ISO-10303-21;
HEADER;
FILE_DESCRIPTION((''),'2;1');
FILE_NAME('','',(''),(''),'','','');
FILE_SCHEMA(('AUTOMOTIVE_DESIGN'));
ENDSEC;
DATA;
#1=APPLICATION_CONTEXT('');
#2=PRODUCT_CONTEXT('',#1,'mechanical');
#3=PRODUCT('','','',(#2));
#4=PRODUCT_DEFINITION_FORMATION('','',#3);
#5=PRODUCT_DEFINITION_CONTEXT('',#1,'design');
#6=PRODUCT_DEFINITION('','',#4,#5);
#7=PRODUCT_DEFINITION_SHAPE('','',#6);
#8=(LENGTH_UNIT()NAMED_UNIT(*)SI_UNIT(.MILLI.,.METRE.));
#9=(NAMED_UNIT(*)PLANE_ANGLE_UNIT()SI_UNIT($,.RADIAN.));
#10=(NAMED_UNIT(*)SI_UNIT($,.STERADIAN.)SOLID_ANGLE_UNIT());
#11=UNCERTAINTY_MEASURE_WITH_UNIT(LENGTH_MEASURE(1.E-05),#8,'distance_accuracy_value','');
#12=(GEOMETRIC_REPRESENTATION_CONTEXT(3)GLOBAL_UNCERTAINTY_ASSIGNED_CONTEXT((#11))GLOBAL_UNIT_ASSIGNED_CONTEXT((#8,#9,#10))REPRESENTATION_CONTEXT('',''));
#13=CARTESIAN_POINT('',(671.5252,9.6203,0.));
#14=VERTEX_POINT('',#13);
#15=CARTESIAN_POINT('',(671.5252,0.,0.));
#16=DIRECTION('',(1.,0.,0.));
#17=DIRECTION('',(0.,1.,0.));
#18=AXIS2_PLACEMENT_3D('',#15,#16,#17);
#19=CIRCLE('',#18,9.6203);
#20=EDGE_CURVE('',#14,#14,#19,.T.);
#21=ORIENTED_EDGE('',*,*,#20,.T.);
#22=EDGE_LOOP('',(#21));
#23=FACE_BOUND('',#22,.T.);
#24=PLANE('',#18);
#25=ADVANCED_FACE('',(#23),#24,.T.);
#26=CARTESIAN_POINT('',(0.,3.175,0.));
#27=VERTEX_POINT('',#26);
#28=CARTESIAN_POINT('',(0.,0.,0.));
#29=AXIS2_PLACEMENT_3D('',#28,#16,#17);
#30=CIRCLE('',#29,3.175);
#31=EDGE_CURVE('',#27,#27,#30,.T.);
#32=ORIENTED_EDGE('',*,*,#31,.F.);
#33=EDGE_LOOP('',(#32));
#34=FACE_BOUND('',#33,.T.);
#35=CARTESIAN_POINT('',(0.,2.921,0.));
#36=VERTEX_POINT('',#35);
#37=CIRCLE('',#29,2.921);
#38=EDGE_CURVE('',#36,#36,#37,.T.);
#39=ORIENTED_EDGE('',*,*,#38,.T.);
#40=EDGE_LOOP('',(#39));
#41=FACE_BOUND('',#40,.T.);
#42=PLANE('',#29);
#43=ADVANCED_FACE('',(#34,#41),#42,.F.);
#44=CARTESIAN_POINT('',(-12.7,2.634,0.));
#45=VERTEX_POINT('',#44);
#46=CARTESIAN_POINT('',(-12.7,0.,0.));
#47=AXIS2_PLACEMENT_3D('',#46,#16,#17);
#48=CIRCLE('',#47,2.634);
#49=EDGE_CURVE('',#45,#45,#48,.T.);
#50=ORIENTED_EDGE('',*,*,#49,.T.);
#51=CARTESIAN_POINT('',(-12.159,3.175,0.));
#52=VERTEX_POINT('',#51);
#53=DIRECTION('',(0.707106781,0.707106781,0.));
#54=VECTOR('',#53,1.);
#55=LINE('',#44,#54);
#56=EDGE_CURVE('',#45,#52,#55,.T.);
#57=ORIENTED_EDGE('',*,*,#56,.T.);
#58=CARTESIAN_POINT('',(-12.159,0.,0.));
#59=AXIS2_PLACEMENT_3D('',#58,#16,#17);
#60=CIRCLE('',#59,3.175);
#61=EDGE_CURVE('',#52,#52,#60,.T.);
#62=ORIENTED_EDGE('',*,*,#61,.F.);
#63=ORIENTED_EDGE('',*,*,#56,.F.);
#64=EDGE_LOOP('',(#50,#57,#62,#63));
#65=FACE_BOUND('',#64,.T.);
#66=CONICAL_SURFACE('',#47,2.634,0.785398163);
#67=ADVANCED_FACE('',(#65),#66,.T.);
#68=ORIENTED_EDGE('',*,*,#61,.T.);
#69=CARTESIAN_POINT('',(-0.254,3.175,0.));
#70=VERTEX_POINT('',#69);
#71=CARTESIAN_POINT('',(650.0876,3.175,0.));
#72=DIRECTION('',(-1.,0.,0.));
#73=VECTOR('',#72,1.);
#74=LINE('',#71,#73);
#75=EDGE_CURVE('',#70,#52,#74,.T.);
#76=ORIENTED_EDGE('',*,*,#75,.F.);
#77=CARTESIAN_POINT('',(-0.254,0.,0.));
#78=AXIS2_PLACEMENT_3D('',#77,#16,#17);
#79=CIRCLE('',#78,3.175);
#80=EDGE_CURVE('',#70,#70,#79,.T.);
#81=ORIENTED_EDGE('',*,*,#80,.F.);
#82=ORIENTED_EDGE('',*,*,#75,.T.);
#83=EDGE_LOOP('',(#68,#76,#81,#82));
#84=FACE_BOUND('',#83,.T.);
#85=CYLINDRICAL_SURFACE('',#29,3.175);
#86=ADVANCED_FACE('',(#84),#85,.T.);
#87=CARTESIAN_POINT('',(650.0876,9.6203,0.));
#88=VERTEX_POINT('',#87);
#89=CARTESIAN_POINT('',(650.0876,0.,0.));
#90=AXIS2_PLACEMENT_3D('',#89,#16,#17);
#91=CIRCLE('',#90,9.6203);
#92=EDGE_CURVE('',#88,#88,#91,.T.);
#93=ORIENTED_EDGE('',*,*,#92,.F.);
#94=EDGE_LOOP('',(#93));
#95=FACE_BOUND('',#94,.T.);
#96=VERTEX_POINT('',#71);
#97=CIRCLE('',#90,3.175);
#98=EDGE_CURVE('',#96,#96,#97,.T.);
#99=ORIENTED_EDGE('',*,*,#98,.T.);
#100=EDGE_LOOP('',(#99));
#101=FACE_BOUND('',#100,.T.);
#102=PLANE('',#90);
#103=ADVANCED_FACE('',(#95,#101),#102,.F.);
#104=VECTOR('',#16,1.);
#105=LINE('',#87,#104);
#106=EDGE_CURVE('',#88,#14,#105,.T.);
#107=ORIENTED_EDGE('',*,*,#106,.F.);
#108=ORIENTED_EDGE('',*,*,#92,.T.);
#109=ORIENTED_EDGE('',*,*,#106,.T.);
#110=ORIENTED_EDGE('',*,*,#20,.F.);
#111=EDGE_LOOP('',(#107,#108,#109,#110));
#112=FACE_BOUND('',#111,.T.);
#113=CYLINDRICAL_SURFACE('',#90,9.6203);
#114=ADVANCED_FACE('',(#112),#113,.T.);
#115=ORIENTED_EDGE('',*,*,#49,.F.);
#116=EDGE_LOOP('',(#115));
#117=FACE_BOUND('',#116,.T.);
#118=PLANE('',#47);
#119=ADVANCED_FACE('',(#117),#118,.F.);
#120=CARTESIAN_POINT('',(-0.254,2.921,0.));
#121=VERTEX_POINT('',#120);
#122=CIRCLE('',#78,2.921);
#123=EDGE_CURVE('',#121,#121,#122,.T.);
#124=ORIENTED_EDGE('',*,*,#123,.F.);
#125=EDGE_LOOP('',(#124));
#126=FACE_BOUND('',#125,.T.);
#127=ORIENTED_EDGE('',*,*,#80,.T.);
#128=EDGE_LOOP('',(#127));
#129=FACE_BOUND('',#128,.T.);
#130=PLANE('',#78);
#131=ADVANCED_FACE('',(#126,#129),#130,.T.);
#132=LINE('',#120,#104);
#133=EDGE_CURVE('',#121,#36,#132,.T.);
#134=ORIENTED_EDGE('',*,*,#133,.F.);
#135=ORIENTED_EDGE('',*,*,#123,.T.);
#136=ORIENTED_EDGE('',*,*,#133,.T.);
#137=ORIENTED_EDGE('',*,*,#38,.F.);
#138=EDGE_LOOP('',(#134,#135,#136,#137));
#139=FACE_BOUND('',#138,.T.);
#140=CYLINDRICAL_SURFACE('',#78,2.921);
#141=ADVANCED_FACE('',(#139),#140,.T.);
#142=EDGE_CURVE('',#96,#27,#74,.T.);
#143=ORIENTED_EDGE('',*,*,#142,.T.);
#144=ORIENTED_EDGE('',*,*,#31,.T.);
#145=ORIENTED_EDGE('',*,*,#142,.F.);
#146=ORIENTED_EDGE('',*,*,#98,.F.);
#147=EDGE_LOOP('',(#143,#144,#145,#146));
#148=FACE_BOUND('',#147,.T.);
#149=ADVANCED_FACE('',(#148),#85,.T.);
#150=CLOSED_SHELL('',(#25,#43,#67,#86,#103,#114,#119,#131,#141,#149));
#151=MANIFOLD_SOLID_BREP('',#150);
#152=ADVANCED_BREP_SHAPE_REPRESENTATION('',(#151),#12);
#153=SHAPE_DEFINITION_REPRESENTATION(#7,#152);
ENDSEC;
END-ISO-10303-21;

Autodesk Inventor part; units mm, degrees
sketch "Sketch_1" plane through (0, 0, 0) normal (0, 0, 1) x (1, 0, 0)
  line L0 (671.5252, 0) -> (0, 0)
  line L1 (0, 0) -> (0, 3.175)
  line L2 (0, 3.175) -> (650.0876, 3.175)
  line L3 (650.0876, 3.175) -> (650.0876, 9.6203)
  line L4 (650.0876, 9.6203) -> (671.5252, 9.6203)
  line L5 (671.5252, 9.6203) -> (671.5252, 0)
  line L6 (671.5252, 0) -> (0, 0)
revolve "Revolution1" add sketch "Sketch_1" angle 360 about axis through (671.5252, 0, 0) along (1, 0, 0)
sketch "Sketch_3" plane through (0, 0, 0) normal (0, 0, 1) x (1, 0, 0)
  line L0 (0, 0) -> (-12.7, 0)
  line L1 (-12.7, 0) -> (-12.7, 2.634)
  line L2 (-12.7, 2.634) -> (-12.159, 3.175)
  line L3 (-12.159, 3.175) -> (0, 3.175)
  line L4 (0, 3.175) -> (0, 0)
  line L5 (0, 0) -> (-12.7, 0)
revolve "Revolution2" add sketch "Sketch_3" angle 360 about axis through (0, 0, 0) along (1, 0, 0)
thread "Thread1" size "1/4-28 UNF" class "2A" standard "ANSI Unified Screw Threads" length 12.159
sketch "Sketch_30" plane through (0, 0, 0) normal (0, 0, 1) x (1, 0, 0)
  line L0 (0, 0) -> (-0.254, 0)
  line L1 (-0.254, 2.921) -> (0, 2.921)
  line L2 (0, 2.921) -> (0, 3.429)
  line L3 (0, 3.429) -> (-0.254, 3.429)
  line L4 (-0.254, 3.429) -> (-0.254, 2.921)
revolve "Revolution3" cut sketch "Sketch_30" angle 360 about axis through (0, 0, 0) along (1, 0, 0)
ref_plane "dia1_XY" through (0, 3.175, 0) normal (1, 0, 0) x (0, 0, -1)
ref_plane "dia1_YZ" through (0, 3.175, 0) normal (0, 0, -1) x (0, 1, 0)
ref_plane "dia1_ZX" through (0, 3.175, 0) normal (0, 1, 0) x (1, 0, 0)
ref_plane "dia12_XY" through (0, 0, 10.9537) normal (1, 0, 0) x (0, 0, -1)
ref_plane "dia12_YZ" through (0, 0, 10.9537) normal (0, 0, -1) x (0, 1, 0)
ref_plane "dia12_ZX" through (0, 0, 10.9537) normal (0, 1, 0) x (1, 0, 0)
ref_plane "dia2_XY" through (0, -3.175, 0) normal (1, 0, 0) x (0, 0, -1)
ref_plane "dia2_YZ" through (0, -3.175, 0) normal (0, 0, -1) x (0, 1, 0)
ref_plane "dia2_ZX" through (0, -3.175, 0) normal (0, 1, 0) x (1, 0, 0)
ref_plane "dia22_XY" through (0, 0, -10.9537) normal (1, 0, 0) x (0, 0, -1)
ref_plane "dia22_YZ" through (0, 0, -10.9537) normal (0, 0, -1) x (0, 1, 0)
ref_plane "dia22_ZX" through (0, 0, -10.9537) normal (0, 1, 0) x (1, 0, 0)
ref_plane "rl1_XY" through (-12.7, 0, 0) normal (1, 0, 0) x (0, 0, -1)
ref_plane "rl1_YZ" through (-12.7, 0, 0) normal (0, 0, -1) x (0, 1, 0)
ref_plane "rl1_ZX" through (-12.7, 0, 0) normal (0, 1, 0) x (1, 0, 0)
ref_plane "rl2_XY" through (0, 0, 0) normal (1, 0, 0) x (0, 0, -1)
ref_plane "rl2_YZ" through (0, 0, 0) normal (0, 0, -1) x (0, 1, 0)
ref_plane "rl2_ZX" through (0, 0, 0) normal (0, 1, 0) x (1, 0, 0)
ref_plane "rod_cp_XY" through (0, 0, 0) normal (1, 0, 0) x (0, 0, -1)
ref_plane "rod_cp_YZ" through (0, 0, 0) normal (0, 0, -1) x (0, 1, 0)
ref_plane "rod_cp_ZX" through (0, 0, 0) normal (0, 1, 0) x (1, 0, 0)
ref_plane "thd1_XY" through (-12.7, 3.175, 0) normal (1, 0, 0) x (0, 0, -1)
ref_plane "thd1_YZ" through (-12.7, 3.175, 0) normal (0, 0, -1) x (0, 1, 0)
ref_plane "thd1_ZX" through (-12.7, 3.175, 0) normal (0, 1, 0) x (1, 0, 0)
ref_plane "thd2_XY" through (-12.7, -3.175, 0) normal (1, 0, 0) x (0, 0, -1)
ref_plane "thd2_YZ" through (-12.7, -3.175, 0) normal (0, 0, -1) x (0, 1, 0)
ref_plane "thd2_ZX" through (-12.7, -3.175, 0) normal (0, 1, 0) x (1, 0, 0)
ref_plane "to_rod_clevis_XY" through (-16.764, 0, 0) normal (1, 0, 0) x (0, 0, -1)
ref_plane "to_rod_clevis_YZ" through (-16.764, 0, 0) normal (0, 0, -1) x (0, 1, 0)
ref_plane "to_rod_clevis_ZX" through (-16.764, 0, 0) normal (0, 1, 0) x (1, 0, 0)
properties part number "SR-0424-DPY0000_rod"
